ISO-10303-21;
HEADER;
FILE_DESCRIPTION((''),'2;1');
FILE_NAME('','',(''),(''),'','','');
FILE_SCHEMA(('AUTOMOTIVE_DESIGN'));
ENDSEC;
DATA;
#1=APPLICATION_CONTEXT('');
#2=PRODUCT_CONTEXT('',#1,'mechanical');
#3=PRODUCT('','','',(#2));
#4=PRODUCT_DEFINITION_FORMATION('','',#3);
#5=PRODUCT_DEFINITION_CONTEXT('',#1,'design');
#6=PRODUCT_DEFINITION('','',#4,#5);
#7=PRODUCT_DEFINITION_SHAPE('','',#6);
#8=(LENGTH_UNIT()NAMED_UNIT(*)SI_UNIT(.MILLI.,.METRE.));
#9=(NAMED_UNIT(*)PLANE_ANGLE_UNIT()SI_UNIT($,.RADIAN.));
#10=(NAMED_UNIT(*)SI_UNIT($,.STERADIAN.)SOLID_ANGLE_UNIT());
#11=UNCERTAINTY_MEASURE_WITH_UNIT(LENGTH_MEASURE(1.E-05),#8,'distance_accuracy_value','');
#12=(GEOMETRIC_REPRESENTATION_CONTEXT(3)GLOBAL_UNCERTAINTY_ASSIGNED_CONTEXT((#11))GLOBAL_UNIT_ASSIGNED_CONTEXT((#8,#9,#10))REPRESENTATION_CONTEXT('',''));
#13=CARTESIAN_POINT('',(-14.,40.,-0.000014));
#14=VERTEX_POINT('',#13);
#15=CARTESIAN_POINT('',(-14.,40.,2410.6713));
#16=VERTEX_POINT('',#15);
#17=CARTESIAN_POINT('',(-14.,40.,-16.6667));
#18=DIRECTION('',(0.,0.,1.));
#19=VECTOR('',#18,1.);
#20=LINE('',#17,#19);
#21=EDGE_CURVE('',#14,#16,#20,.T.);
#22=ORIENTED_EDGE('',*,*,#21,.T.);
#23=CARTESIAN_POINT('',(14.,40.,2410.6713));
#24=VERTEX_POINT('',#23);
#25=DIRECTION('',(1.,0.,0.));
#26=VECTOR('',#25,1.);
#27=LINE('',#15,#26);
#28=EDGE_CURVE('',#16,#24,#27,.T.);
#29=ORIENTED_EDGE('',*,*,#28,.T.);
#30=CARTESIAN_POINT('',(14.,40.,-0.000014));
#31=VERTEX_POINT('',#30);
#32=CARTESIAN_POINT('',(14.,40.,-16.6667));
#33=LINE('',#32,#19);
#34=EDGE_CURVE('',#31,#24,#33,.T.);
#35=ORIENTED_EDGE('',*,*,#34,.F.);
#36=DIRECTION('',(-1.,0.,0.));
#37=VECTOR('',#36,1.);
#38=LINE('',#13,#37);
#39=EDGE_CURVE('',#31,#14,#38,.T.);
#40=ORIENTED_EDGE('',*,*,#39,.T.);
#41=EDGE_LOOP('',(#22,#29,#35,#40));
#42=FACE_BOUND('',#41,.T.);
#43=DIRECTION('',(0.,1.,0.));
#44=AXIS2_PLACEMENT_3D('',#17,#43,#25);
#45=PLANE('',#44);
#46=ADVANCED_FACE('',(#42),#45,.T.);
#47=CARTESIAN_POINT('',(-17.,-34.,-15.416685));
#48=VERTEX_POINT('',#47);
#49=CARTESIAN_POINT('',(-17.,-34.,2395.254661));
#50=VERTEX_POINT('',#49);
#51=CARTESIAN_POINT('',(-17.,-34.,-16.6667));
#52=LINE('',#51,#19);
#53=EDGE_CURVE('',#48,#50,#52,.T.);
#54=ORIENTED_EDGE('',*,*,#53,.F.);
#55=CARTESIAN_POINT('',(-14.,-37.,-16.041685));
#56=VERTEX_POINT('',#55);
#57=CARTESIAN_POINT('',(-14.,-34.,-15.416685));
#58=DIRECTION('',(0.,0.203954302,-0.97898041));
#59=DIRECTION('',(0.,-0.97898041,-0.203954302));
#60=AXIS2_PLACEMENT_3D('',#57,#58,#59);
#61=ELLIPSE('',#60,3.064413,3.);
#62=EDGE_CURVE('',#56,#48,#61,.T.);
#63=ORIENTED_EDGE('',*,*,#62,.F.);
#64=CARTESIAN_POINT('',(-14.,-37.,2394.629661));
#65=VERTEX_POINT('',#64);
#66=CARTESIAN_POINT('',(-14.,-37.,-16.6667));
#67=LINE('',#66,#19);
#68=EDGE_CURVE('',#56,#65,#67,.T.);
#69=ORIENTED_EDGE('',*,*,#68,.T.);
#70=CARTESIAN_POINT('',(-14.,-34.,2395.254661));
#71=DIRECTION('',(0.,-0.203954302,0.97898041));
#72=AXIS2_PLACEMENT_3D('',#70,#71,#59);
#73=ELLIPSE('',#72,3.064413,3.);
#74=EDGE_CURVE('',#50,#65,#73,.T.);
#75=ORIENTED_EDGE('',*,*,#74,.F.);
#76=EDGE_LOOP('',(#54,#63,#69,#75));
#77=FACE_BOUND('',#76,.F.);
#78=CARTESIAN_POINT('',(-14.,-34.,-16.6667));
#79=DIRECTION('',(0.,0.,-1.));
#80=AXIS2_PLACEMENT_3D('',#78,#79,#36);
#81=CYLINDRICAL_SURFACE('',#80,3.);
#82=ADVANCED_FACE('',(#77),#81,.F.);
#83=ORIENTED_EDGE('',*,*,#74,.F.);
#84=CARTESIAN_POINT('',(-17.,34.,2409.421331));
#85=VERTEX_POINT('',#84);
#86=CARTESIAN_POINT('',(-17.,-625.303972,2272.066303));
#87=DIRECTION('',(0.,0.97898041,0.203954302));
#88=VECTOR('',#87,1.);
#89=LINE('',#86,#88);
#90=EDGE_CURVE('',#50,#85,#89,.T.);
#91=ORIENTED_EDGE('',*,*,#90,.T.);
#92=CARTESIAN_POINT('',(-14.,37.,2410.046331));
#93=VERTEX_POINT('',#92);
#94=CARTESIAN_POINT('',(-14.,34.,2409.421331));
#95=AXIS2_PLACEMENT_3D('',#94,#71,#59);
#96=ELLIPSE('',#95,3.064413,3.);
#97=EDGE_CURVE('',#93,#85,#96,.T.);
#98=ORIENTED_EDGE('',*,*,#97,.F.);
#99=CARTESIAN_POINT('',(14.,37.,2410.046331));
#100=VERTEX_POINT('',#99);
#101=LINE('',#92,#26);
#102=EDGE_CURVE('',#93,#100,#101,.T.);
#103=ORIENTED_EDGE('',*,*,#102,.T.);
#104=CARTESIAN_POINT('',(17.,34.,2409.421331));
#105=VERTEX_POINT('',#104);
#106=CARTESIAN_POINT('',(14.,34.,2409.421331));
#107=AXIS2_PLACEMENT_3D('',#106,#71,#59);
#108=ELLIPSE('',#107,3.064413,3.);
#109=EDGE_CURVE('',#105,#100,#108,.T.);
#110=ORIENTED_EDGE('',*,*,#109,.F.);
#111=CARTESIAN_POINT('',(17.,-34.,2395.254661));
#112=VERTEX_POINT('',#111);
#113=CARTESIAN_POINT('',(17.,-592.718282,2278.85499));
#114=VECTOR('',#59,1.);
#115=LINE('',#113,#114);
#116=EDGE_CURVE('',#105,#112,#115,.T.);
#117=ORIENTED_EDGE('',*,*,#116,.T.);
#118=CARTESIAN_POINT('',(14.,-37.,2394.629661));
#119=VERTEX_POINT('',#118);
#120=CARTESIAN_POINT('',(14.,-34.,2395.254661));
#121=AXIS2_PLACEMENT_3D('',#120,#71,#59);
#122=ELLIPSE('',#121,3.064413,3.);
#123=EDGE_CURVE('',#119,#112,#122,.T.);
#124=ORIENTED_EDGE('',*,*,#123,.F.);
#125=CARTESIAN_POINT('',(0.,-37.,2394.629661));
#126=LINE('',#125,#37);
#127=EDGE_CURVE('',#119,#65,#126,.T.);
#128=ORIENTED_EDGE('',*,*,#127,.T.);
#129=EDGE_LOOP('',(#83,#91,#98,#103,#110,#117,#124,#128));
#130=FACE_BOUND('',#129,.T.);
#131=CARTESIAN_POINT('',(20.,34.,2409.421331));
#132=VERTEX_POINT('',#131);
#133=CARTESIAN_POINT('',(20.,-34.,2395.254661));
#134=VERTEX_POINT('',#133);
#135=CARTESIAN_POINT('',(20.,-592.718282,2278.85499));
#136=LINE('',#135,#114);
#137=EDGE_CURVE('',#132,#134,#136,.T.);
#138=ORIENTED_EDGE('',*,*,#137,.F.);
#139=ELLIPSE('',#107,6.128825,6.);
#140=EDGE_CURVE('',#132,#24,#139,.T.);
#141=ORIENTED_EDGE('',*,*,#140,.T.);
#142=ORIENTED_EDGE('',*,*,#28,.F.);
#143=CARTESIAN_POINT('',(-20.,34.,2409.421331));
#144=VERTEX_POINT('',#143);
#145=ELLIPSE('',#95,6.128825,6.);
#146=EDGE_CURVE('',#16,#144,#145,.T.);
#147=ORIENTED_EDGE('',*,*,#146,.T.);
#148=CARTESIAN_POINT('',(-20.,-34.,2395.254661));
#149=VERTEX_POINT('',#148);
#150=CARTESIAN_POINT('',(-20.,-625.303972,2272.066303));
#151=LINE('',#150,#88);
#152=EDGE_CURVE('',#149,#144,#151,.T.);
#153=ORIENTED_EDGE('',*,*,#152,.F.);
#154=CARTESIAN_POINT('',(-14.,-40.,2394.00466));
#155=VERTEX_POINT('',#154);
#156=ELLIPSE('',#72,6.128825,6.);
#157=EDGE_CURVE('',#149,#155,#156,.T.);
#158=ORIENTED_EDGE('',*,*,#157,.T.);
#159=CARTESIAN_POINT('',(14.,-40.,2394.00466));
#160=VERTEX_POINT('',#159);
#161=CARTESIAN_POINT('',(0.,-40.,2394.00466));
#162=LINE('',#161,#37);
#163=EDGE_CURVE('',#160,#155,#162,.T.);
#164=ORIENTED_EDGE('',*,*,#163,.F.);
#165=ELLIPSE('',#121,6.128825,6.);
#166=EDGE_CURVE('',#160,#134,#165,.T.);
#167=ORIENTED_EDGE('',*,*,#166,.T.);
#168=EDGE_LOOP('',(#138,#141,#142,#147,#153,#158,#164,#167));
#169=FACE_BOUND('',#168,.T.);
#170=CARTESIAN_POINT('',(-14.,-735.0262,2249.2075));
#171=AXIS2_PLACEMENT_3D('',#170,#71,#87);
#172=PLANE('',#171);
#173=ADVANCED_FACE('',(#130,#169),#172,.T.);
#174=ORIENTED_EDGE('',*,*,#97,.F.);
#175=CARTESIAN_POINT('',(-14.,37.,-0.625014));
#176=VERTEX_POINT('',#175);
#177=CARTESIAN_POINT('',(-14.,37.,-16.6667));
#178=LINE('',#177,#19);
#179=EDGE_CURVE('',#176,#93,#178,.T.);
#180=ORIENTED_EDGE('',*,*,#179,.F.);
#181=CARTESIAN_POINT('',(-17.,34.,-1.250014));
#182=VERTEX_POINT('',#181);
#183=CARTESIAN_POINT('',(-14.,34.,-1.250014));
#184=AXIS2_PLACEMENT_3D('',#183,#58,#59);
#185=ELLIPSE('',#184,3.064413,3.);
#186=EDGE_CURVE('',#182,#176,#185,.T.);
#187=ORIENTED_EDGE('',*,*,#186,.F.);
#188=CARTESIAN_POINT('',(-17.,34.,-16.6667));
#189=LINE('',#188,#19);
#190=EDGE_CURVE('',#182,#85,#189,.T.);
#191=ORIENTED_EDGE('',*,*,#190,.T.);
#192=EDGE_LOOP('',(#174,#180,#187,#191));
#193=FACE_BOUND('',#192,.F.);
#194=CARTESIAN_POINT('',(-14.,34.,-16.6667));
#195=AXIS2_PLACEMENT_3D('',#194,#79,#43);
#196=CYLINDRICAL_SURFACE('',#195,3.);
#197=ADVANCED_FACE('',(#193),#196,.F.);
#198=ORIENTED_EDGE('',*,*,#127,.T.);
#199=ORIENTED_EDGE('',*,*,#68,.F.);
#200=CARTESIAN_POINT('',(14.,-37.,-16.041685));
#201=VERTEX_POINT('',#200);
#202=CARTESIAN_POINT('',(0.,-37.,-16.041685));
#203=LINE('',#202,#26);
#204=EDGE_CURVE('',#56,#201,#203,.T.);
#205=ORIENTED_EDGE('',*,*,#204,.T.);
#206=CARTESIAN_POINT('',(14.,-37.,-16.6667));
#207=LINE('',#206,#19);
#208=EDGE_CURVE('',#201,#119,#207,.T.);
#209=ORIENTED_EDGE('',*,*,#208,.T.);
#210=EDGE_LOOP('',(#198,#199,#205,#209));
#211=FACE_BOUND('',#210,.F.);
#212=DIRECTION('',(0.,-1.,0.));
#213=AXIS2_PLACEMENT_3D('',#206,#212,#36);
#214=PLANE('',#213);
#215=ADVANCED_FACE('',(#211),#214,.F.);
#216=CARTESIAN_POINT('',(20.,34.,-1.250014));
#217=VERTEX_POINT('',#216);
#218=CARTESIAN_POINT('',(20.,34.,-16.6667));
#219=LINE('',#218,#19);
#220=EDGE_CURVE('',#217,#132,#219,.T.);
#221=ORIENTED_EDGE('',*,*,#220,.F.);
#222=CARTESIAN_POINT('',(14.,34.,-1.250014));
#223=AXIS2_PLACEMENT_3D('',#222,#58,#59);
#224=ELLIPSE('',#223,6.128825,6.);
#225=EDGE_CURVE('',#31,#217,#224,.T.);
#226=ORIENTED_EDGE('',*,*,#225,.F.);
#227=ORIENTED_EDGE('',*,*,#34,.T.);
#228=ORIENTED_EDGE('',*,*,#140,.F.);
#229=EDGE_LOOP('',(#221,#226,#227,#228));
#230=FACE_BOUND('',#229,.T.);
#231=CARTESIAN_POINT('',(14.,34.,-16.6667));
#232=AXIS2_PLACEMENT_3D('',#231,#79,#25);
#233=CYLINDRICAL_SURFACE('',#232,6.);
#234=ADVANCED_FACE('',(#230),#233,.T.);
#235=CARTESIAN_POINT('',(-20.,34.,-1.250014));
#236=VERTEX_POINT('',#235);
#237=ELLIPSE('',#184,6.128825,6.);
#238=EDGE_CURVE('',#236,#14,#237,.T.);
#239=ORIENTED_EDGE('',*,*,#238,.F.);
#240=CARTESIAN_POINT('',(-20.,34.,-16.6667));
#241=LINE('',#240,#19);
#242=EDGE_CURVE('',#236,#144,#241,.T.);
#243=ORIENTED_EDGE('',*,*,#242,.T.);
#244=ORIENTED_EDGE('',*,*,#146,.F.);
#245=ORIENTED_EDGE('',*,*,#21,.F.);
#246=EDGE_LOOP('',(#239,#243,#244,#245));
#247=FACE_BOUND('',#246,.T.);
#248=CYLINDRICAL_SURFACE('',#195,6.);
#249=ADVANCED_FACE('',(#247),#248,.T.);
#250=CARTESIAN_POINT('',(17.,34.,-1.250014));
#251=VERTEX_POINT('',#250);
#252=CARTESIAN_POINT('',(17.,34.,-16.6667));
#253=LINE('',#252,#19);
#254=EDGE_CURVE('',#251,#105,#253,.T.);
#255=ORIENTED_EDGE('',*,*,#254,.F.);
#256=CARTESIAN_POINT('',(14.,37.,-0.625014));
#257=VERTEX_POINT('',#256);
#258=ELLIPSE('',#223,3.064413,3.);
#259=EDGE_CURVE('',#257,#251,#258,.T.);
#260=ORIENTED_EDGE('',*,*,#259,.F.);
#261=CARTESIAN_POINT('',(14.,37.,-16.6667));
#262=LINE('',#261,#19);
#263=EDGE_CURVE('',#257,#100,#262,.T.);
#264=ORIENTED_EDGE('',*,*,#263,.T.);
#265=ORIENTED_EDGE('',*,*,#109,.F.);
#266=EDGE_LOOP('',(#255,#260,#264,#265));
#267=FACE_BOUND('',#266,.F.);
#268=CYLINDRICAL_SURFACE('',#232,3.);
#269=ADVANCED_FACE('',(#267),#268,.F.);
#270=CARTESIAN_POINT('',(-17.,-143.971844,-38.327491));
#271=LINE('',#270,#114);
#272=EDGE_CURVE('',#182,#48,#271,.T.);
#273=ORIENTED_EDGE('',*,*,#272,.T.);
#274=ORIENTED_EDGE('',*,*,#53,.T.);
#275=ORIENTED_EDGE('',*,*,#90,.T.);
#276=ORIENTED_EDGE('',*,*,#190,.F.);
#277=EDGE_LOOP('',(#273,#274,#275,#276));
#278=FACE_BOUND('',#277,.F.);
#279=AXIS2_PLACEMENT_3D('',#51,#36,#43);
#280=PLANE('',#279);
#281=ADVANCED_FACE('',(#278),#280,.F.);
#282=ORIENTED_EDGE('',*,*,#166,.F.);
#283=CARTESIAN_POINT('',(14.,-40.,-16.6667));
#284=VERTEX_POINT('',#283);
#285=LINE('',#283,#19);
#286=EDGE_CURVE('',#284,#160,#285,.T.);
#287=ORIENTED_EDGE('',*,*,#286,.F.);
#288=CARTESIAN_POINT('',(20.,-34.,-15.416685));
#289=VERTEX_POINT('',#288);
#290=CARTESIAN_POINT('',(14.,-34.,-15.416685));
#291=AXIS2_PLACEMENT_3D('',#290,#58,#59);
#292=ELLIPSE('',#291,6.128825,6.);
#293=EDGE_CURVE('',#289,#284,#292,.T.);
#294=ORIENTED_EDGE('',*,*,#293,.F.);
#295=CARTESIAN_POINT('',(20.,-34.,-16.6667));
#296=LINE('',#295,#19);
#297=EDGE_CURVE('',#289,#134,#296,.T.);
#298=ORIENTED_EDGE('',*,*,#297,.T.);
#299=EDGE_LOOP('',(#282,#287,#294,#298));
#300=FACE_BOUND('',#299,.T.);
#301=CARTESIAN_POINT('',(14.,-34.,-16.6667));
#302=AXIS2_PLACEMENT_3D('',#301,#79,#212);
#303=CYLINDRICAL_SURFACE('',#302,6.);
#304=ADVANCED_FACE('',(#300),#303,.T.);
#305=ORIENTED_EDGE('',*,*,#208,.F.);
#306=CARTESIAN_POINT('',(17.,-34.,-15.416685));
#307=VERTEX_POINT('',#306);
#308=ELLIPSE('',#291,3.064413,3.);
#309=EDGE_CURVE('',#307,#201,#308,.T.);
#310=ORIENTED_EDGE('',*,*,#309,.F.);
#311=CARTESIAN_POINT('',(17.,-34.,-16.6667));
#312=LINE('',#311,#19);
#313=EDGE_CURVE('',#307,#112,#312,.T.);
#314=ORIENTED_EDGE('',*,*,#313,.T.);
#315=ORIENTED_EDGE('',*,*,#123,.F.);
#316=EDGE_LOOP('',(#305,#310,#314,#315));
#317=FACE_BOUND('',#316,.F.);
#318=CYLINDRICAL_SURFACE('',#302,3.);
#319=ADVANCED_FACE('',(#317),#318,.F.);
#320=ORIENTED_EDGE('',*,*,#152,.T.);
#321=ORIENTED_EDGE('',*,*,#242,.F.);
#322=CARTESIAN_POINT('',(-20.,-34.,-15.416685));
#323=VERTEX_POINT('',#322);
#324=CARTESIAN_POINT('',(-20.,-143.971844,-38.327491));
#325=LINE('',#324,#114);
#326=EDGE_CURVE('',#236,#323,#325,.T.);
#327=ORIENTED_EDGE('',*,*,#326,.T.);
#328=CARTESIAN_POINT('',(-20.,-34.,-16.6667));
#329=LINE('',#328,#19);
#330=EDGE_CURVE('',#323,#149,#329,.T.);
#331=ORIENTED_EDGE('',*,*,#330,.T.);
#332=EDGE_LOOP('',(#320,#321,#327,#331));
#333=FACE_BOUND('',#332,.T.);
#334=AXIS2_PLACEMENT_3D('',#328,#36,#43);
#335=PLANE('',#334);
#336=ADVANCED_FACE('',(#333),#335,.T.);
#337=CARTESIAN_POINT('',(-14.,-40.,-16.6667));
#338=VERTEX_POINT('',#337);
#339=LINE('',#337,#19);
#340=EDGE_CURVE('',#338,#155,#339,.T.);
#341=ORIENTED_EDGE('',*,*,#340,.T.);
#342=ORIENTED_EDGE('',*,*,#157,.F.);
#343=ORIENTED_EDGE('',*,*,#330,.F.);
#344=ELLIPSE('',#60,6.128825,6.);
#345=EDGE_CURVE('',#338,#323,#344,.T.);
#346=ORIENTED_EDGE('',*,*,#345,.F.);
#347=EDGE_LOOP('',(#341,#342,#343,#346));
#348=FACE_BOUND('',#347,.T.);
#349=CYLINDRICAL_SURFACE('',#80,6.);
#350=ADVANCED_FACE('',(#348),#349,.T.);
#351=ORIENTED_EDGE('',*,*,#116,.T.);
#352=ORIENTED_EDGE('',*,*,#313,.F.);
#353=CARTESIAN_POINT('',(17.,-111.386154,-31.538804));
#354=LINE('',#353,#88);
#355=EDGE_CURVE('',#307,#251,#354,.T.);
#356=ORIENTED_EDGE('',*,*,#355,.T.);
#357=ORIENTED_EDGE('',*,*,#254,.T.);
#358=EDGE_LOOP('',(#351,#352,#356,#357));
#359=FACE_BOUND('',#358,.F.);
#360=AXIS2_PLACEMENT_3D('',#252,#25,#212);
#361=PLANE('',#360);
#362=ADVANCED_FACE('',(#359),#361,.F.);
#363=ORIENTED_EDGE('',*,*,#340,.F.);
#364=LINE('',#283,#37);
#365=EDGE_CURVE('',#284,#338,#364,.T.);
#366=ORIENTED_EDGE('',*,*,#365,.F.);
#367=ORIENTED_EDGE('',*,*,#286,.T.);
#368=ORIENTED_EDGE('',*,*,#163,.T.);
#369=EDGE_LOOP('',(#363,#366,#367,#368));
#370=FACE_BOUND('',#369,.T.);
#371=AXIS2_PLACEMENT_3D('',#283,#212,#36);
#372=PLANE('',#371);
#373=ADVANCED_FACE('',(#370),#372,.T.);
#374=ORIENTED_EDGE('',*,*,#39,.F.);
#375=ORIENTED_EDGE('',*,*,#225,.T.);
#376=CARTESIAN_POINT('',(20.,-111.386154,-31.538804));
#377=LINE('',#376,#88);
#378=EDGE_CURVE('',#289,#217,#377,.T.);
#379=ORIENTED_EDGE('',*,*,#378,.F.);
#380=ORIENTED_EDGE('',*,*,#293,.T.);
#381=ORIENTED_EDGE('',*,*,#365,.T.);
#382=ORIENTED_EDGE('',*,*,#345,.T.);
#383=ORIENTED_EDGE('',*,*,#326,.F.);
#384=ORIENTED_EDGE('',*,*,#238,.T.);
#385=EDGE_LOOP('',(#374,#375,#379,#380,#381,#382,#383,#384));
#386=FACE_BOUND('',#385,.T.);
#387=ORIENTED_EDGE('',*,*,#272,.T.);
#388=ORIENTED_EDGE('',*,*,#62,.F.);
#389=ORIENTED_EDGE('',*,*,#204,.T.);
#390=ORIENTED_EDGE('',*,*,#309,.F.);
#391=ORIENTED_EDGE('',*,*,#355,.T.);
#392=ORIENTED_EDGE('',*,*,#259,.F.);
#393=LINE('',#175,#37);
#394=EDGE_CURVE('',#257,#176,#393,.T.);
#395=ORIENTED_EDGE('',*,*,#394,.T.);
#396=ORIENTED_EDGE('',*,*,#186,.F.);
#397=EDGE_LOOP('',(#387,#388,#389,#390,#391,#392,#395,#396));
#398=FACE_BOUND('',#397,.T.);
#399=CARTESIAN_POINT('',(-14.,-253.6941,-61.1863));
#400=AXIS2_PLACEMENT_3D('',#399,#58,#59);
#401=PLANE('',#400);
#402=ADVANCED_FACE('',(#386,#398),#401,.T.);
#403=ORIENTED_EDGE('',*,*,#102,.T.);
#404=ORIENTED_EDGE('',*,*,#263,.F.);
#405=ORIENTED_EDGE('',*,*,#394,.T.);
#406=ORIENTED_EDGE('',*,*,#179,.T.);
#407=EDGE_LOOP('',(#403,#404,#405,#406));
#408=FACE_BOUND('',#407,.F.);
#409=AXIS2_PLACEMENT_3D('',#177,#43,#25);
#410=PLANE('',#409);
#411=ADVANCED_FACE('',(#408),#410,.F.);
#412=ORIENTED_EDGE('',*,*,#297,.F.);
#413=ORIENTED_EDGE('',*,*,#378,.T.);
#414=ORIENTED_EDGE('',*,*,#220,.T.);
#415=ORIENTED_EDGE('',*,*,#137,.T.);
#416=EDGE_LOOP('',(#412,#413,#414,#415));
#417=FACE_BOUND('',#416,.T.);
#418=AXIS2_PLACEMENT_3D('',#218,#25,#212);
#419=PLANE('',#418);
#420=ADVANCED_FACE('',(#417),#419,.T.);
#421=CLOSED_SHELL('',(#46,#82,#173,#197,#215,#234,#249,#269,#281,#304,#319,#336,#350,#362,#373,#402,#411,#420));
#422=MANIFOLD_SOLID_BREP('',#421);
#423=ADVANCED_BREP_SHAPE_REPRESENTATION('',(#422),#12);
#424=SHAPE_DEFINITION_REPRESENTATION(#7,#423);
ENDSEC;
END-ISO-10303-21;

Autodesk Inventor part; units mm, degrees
ref_plane "Start Plane" through (0, 0, -16.6667) normal (0, 0, 1) x (1, 0, 0)
ref_plane "End Plane" through (0, 0, 2410.6713) normal (0, 0, 1) x (1, 0, 0)
sketch "Sketch" plane through (0, 0, 0) normal (0, 0, 1) x (1, 0, 0)
  line L0 (-20, -34) -> (-20, 34)
  line L1 (-14, 40) -> (14, 40)
  line L2 (20, 34) -> (20, -34)
  line L3 (14, -40) -> (-14, -40)
  arc A0 (-20, -34) -> (-14, -40) centre (-14, -34) ccw
  arc A1 (20, 34) -> (14, 40) centre (14, 34) ccw
  arc A2 (-14, 40) -> (-20, 34) centre (-14, 34) ccw
  arc A3 (14, -40) -> (20, -34) centre (14, -34) ccw
  arc A4 (-14, 37) -> (-17, 34) centre (-14, 34) ccw
  line L4 (-14, 37) -> (14, 37)
  arc A5 (17, 34) -> (14, 37) centre (14, 34) ccw
  line L5 (17, 34) -> (17, -34)
  arc A6 (14, -37) -> (17, -34) centre (14, -34) ccw
  line L6 (14, -37) -> (-14, -37)
  arc A7 (-17, -34) -> (-14, -37) centre (-14, -34) ccw
  line L7 (-17, -34) -> (-17, 34)
  line L8 (0, 57.7397) -> (0, -57.7397) construction
  line L9 (-29.7397, 0) -> (29.7397, 0) construction
  dimension "d7" = 6
  dimension "d9" = 40
  dimension "d11" = 80
  dimension "d12" = 3
  dimension "d15" = 20
  dimension "d16" = 40
extrude "Body" add sketch "Sketch" along normal up to surface (2427.338 mm away) from surface at -16.6667
sketch "Sketch3" plane through (0, 0, 0) normal (0, 0, 1) x (1, 0, 0)
  line L0 (0, 0) -> (10, 0)
ref_plane "Work Plane3" through (0, 0, 0) normal (0, -1, 0) x (1, 0, 0)
ref_plane "Work Plane4" through (-14, -253.6941, -61.1863) normal (0, 0.2039543, -0.9789804) x (1, 0, 0)
split "Split1" plane through (-14, -253.6941, -61.1863) removes the side toward (0, 0.2039543, -0.9789804)
ref_plane "Work Plane5" through (-14, -735.0262, 2249.2075) normal (0, -0.2039543, 0.9789804) x (1, 0, 0)
split "Split2" plane through (-14, -735.0262, 2249.2075) removes the side toward (0, -0.2039543, 0.9789804)
sketch "Sketch4" plane through (0, 0, 0) normal (0, -1, 0) x (1, 0, 0)
  line L0 (-2, -16.6667) -> (12, -16.6667) projected
  line L1 (-2, 2410.6713) -> (12, 2410.6713) projected
  dimension "d18" = 2427.338
equation "\"d7\" = G_IR"
equation "\"d9\" = G_W"
equation "\"d11\" = G_H"
equation "\"d12\" = G_T"
equation "\"d15\" = 0.5 * d9"
equation "\"d16\" = 0.5 * d11"
equation "\"d3\" = G_L"
equation "\"G_W\" = 40"
equation "\"G_H\" = 80"
equation "\"G_T\" = 3"
equation "\"G_IR\" = 6"
equation "\"G_L\" = d18"
equation "\"G_OFFSET_START\" = 16.66667"
equation "\"G_OFFSET_END\" = -40.85884"
equation "\"d13\" = -G_OFFSET_START"
equation "\"d14\" = G_OFFSET_END + B_L"
equation "\"B_L\" = 2451.53013"
properties part number "ISO 10799-2 - 80x40x3 - 2427.34" material "Steel, Mild"
